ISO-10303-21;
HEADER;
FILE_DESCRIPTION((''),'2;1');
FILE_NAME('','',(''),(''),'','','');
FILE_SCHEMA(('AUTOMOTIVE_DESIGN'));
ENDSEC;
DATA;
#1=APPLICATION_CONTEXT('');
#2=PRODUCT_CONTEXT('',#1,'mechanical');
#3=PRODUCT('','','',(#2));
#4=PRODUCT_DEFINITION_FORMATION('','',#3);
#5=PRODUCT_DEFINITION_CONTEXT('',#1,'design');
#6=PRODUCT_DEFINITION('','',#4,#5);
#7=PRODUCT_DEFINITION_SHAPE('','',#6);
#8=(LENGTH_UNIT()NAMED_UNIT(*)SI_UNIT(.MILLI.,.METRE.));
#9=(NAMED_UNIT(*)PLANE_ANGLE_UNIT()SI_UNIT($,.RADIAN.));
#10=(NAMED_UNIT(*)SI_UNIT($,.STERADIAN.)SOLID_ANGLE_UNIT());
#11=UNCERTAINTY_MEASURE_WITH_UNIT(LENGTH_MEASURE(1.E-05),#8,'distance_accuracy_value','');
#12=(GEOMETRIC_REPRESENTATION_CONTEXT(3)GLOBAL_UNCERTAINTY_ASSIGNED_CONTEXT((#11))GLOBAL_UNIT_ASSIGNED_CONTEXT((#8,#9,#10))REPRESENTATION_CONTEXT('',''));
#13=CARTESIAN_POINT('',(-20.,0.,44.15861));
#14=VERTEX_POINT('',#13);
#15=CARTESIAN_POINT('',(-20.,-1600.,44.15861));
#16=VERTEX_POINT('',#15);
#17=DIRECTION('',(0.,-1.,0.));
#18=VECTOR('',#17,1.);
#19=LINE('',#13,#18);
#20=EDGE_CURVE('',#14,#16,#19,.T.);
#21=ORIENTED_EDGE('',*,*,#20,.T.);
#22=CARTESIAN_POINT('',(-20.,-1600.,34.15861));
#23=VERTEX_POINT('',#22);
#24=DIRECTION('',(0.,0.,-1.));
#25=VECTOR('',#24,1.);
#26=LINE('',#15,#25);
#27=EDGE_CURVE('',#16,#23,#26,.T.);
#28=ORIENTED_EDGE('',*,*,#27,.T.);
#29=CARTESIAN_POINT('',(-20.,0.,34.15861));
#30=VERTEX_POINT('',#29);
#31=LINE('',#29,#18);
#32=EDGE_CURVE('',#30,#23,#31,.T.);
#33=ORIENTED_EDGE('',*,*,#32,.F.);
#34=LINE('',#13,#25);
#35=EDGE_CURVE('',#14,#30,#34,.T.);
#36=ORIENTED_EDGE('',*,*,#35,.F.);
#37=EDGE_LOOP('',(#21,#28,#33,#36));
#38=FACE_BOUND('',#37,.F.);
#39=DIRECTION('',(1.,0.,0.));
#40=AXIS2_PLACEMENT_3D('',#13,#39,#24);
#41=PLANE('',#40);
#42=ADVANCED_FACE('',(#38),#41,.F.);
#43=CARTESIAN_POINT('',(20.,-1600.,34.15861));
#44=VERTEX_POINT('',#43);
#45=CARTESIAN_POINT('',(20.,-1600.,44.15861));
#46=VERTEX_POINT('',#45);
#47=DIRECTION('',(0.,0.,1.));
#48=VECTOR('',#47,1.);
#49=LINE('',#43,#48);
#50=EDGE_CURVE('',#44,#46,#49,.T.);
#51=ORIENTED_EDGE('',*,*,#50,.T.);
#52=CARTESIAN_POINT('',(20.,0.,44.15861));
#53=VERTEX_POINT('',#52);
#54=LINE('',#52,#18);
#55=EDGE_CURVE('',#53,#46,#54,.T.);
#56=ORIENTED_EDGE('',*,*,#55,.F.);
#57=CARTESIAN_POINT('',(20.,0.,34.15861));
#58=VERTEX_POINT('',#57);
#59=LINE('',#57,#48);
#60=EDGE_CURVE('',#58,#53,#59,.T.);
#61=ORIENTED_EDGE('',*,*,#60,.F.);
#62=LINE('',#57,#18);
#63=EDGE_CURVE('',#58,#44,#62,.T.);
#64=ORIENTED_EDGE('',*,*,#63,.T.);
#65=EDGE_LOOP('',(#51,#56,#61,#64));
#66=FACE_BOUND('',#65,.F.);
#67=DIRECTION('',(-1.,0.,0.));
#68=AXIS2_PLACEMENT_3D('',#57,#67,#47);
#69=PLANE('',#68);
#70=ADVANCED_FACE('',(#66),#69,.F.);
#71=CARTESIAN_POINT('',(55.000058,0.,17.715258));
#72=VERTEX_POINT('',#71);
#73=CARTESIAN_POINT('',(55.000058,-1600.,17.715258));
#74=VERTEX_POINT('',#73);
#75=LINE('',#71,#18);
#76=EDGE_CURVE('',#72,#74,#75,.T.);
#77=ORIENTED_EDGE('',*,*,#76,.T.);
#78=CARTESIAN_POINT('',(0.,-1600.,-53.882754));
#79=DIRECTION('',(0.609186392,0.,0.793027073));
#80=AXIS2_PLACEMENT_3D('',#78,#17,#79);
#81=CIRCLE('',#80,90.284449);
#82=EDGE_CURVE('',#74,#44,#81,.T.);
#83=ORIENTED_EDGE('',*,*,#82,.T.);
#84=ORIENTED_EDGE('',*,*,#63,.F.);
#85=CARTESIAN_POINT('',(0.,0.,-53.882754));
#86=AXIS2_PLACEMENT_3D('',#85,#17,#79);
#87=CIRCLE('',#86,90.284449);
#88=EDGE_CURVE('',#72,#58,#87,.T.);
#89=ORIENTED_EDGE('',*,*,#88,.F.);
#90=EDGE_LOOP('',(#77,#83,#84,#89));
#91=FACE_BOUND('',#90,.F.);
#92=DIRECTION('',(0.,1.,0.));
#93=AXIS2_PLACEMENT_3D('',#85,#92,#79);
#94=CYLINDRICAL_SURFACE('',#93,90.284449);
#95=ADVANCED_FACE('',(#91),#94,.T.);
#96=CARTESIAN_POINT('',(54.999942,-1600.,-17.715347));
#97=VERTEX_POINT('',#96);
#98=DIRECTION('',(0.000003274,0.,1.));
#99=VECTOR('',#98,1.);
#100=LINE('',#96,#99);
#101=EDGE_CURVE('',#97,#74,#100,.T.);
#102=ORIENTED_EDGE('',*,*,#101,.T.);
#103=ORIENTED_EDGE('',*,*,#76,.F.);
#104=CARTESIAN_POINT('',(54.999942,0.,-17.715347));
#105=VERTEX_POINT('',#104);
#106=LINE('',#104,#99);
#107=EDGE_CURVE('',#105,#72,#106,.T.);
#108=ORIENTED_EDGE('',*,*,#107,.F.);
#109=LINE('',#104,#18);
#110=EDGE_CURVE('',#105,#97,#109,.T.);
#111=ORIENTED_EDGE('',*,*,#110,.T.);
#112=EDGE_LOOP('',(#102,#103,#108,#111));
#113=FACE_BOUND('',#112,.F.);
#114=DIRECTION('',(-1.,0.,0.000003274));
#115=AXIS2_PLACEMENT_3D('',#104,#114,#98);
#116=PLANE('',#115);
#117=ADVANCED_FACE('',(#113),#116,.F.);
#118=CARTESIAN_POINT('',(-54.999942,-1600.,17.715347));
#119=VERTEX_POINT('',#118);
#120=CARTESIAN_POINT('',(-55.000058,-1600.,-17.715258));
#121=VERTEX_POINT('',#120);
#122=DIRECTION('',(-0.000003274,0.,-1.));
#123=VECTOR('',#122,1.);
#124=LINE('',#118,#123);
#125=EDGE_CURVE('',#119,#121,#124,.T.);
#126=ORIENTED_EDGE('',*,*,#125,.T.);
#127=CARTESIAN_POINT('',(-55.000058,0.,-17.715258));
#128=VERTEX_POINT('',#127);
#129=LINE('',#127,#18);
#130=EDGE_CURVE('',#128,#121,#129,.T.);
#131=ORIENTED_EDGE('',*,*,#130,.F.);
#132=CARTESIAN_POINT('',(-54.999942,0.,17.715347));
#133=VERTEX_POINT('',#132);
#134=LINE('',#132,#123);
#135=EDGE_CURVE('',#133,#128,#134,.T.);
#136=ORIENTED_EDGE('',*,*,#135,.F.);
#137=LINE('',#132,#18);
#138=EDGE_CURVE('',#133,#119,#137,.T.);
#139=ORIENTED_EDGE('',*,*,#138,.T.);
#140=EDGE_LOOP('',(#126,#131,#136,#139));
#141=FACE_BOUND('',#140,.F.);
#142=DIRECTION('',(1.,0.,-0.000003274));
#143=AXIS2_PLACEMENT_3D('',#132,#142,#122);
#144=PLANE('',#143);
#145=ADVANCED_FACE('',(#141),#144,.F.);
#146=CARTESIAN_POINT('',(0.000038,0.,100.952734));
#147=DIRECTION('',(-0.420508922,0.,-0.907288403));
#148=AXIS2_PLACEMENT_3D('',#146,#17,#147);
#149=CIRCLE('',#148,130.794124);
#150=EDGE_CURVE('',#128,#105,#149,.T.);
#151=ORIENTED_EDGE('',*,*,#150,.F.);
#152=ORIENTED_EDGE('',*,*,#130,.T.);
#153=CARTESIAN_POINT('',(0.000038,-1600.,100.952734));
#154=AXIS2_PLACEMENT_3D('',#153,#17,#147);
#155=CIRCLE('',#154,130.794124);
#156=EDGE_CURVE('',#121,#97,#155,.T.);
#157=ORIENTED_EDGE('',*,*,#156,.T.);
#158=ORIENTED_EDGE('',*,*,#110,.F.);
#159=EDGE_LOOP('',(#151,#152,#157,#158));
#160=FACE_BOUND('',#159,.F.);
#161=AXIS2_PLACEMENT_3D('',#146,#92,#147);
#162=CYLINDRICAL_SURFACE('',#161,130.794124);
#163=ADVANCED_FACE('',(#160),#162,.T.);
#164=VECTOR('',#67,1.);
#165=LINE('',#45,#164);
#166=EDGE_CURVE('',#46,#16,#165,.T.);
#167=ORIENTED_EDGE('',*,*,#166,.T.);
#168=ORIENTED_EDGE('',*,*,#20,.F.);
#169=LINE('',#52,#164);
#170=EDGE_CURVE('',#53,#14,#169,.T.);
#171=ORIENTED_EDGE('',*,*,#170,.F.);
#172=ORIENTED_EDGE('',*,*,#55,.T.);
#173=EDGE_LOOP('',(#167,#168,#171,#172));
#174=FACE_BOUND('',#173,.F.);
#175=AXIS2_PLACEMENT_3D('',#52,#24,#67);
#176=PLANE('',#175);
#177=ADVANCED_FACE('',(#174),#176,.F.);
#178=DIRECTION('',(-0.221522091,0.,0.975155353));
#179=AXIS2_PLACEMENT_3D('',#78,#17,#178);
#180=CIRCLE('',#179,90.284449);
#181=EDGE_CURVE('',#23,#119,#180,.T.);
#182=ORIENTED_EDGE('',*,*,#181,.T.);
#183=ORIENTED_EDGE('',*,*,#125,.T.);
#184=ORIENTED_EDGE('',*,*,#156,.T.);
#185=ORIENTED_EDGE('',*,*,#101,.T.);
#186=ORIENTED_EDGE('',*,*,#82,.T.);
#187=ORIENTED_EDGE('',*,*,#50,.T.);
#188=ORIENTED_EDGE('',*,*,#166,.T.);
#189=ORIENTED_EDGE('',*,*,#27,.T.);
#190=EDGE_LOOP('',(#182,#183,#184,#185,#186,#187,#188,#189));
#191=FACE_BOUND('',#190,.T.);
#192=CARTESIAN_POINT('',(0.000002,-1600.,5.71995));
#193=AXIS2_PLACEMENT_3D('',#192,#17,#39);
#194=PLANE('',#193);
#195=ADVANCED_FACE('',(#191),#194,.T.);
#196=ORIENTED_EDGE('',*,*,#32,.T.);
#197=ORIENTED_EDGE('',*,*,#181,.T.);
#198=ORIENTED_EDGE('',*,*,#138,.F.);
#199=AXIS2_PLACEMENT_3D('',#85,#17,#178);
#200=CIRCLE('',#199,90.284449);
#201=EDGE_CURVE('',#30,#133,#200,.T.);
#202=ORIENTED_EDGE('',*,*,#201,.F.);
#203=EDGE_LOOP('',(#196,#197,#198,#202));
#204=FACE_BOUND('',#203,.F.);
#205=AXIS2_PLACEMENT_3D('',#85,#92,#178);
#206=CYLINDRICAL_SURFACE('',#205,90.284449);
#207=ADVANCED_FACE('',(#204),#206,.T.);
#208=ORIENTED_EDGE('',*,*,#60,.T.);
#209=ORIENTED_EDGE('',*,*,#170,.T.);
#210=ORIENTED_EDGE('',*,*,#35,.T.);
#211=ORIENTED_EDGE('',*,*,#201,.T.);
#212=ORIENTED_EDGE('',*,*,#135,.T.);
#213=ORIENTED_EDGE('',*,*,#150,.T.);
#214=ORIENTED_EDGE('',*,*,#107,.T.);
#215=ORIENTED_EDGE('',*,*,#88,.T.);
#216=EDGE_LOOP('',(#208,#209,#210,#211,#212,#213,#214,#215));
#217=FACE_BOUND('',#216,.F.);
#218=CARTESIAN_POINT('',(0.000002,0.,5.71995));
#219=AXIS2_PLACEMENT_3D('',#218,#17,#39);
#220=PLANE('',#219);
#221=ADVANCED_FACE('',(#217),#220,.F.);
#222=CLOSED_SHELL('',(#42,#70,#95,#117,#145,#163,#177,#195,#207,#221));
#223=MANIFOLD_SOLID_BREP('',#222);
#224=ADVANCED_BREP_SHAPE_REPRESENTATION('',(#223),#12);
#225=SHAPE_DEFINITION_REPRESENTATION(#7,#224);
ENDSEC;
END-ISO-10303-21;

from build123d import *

# Parameters (mm, degrees)
F1_DEPTH = 1600


# Not quite as in the source:
# - ends of sketch curves that miss each other by under 0.0002 mm in the source are joined


with BuildPart() as f1:
    # F0 (on Front) → F1 (new body)
    with BuildSketch(Plane.XZ):
        with BuildLine():
            Line((54.9999419978, -17.7153473352), (55.0000580024, 17.7152582231))
            ThreePointArc((55.0000580024, 17.7152582231), (38.3907297006, 27.832811217), (20, 34.1586096885))
            Line((20, 34.1586096885), (20, 44.1586096885))
            Line((20, 44.1586096885), (-20, 44.1586096885))
            Line((-20, 44.1586096885), (-20, 34.1586096885))
            ThreePointArc((-20, 34.1586096885), (-38.390663502, 27.8328423177), (-54.9999419978, 17.7153473352))
            Line((-54.9999419978, 17.7153473352), (-55.0000580024, -17.7152582231))
            ThreePointArc((-55.0000580024, -17.7152582231), (-6.78258e-05, -29.8413903114), (54.9999419978, -17.7153473352))
        make_face()
    extrude(amount=F1_DEPTH)


solid = f1.part
